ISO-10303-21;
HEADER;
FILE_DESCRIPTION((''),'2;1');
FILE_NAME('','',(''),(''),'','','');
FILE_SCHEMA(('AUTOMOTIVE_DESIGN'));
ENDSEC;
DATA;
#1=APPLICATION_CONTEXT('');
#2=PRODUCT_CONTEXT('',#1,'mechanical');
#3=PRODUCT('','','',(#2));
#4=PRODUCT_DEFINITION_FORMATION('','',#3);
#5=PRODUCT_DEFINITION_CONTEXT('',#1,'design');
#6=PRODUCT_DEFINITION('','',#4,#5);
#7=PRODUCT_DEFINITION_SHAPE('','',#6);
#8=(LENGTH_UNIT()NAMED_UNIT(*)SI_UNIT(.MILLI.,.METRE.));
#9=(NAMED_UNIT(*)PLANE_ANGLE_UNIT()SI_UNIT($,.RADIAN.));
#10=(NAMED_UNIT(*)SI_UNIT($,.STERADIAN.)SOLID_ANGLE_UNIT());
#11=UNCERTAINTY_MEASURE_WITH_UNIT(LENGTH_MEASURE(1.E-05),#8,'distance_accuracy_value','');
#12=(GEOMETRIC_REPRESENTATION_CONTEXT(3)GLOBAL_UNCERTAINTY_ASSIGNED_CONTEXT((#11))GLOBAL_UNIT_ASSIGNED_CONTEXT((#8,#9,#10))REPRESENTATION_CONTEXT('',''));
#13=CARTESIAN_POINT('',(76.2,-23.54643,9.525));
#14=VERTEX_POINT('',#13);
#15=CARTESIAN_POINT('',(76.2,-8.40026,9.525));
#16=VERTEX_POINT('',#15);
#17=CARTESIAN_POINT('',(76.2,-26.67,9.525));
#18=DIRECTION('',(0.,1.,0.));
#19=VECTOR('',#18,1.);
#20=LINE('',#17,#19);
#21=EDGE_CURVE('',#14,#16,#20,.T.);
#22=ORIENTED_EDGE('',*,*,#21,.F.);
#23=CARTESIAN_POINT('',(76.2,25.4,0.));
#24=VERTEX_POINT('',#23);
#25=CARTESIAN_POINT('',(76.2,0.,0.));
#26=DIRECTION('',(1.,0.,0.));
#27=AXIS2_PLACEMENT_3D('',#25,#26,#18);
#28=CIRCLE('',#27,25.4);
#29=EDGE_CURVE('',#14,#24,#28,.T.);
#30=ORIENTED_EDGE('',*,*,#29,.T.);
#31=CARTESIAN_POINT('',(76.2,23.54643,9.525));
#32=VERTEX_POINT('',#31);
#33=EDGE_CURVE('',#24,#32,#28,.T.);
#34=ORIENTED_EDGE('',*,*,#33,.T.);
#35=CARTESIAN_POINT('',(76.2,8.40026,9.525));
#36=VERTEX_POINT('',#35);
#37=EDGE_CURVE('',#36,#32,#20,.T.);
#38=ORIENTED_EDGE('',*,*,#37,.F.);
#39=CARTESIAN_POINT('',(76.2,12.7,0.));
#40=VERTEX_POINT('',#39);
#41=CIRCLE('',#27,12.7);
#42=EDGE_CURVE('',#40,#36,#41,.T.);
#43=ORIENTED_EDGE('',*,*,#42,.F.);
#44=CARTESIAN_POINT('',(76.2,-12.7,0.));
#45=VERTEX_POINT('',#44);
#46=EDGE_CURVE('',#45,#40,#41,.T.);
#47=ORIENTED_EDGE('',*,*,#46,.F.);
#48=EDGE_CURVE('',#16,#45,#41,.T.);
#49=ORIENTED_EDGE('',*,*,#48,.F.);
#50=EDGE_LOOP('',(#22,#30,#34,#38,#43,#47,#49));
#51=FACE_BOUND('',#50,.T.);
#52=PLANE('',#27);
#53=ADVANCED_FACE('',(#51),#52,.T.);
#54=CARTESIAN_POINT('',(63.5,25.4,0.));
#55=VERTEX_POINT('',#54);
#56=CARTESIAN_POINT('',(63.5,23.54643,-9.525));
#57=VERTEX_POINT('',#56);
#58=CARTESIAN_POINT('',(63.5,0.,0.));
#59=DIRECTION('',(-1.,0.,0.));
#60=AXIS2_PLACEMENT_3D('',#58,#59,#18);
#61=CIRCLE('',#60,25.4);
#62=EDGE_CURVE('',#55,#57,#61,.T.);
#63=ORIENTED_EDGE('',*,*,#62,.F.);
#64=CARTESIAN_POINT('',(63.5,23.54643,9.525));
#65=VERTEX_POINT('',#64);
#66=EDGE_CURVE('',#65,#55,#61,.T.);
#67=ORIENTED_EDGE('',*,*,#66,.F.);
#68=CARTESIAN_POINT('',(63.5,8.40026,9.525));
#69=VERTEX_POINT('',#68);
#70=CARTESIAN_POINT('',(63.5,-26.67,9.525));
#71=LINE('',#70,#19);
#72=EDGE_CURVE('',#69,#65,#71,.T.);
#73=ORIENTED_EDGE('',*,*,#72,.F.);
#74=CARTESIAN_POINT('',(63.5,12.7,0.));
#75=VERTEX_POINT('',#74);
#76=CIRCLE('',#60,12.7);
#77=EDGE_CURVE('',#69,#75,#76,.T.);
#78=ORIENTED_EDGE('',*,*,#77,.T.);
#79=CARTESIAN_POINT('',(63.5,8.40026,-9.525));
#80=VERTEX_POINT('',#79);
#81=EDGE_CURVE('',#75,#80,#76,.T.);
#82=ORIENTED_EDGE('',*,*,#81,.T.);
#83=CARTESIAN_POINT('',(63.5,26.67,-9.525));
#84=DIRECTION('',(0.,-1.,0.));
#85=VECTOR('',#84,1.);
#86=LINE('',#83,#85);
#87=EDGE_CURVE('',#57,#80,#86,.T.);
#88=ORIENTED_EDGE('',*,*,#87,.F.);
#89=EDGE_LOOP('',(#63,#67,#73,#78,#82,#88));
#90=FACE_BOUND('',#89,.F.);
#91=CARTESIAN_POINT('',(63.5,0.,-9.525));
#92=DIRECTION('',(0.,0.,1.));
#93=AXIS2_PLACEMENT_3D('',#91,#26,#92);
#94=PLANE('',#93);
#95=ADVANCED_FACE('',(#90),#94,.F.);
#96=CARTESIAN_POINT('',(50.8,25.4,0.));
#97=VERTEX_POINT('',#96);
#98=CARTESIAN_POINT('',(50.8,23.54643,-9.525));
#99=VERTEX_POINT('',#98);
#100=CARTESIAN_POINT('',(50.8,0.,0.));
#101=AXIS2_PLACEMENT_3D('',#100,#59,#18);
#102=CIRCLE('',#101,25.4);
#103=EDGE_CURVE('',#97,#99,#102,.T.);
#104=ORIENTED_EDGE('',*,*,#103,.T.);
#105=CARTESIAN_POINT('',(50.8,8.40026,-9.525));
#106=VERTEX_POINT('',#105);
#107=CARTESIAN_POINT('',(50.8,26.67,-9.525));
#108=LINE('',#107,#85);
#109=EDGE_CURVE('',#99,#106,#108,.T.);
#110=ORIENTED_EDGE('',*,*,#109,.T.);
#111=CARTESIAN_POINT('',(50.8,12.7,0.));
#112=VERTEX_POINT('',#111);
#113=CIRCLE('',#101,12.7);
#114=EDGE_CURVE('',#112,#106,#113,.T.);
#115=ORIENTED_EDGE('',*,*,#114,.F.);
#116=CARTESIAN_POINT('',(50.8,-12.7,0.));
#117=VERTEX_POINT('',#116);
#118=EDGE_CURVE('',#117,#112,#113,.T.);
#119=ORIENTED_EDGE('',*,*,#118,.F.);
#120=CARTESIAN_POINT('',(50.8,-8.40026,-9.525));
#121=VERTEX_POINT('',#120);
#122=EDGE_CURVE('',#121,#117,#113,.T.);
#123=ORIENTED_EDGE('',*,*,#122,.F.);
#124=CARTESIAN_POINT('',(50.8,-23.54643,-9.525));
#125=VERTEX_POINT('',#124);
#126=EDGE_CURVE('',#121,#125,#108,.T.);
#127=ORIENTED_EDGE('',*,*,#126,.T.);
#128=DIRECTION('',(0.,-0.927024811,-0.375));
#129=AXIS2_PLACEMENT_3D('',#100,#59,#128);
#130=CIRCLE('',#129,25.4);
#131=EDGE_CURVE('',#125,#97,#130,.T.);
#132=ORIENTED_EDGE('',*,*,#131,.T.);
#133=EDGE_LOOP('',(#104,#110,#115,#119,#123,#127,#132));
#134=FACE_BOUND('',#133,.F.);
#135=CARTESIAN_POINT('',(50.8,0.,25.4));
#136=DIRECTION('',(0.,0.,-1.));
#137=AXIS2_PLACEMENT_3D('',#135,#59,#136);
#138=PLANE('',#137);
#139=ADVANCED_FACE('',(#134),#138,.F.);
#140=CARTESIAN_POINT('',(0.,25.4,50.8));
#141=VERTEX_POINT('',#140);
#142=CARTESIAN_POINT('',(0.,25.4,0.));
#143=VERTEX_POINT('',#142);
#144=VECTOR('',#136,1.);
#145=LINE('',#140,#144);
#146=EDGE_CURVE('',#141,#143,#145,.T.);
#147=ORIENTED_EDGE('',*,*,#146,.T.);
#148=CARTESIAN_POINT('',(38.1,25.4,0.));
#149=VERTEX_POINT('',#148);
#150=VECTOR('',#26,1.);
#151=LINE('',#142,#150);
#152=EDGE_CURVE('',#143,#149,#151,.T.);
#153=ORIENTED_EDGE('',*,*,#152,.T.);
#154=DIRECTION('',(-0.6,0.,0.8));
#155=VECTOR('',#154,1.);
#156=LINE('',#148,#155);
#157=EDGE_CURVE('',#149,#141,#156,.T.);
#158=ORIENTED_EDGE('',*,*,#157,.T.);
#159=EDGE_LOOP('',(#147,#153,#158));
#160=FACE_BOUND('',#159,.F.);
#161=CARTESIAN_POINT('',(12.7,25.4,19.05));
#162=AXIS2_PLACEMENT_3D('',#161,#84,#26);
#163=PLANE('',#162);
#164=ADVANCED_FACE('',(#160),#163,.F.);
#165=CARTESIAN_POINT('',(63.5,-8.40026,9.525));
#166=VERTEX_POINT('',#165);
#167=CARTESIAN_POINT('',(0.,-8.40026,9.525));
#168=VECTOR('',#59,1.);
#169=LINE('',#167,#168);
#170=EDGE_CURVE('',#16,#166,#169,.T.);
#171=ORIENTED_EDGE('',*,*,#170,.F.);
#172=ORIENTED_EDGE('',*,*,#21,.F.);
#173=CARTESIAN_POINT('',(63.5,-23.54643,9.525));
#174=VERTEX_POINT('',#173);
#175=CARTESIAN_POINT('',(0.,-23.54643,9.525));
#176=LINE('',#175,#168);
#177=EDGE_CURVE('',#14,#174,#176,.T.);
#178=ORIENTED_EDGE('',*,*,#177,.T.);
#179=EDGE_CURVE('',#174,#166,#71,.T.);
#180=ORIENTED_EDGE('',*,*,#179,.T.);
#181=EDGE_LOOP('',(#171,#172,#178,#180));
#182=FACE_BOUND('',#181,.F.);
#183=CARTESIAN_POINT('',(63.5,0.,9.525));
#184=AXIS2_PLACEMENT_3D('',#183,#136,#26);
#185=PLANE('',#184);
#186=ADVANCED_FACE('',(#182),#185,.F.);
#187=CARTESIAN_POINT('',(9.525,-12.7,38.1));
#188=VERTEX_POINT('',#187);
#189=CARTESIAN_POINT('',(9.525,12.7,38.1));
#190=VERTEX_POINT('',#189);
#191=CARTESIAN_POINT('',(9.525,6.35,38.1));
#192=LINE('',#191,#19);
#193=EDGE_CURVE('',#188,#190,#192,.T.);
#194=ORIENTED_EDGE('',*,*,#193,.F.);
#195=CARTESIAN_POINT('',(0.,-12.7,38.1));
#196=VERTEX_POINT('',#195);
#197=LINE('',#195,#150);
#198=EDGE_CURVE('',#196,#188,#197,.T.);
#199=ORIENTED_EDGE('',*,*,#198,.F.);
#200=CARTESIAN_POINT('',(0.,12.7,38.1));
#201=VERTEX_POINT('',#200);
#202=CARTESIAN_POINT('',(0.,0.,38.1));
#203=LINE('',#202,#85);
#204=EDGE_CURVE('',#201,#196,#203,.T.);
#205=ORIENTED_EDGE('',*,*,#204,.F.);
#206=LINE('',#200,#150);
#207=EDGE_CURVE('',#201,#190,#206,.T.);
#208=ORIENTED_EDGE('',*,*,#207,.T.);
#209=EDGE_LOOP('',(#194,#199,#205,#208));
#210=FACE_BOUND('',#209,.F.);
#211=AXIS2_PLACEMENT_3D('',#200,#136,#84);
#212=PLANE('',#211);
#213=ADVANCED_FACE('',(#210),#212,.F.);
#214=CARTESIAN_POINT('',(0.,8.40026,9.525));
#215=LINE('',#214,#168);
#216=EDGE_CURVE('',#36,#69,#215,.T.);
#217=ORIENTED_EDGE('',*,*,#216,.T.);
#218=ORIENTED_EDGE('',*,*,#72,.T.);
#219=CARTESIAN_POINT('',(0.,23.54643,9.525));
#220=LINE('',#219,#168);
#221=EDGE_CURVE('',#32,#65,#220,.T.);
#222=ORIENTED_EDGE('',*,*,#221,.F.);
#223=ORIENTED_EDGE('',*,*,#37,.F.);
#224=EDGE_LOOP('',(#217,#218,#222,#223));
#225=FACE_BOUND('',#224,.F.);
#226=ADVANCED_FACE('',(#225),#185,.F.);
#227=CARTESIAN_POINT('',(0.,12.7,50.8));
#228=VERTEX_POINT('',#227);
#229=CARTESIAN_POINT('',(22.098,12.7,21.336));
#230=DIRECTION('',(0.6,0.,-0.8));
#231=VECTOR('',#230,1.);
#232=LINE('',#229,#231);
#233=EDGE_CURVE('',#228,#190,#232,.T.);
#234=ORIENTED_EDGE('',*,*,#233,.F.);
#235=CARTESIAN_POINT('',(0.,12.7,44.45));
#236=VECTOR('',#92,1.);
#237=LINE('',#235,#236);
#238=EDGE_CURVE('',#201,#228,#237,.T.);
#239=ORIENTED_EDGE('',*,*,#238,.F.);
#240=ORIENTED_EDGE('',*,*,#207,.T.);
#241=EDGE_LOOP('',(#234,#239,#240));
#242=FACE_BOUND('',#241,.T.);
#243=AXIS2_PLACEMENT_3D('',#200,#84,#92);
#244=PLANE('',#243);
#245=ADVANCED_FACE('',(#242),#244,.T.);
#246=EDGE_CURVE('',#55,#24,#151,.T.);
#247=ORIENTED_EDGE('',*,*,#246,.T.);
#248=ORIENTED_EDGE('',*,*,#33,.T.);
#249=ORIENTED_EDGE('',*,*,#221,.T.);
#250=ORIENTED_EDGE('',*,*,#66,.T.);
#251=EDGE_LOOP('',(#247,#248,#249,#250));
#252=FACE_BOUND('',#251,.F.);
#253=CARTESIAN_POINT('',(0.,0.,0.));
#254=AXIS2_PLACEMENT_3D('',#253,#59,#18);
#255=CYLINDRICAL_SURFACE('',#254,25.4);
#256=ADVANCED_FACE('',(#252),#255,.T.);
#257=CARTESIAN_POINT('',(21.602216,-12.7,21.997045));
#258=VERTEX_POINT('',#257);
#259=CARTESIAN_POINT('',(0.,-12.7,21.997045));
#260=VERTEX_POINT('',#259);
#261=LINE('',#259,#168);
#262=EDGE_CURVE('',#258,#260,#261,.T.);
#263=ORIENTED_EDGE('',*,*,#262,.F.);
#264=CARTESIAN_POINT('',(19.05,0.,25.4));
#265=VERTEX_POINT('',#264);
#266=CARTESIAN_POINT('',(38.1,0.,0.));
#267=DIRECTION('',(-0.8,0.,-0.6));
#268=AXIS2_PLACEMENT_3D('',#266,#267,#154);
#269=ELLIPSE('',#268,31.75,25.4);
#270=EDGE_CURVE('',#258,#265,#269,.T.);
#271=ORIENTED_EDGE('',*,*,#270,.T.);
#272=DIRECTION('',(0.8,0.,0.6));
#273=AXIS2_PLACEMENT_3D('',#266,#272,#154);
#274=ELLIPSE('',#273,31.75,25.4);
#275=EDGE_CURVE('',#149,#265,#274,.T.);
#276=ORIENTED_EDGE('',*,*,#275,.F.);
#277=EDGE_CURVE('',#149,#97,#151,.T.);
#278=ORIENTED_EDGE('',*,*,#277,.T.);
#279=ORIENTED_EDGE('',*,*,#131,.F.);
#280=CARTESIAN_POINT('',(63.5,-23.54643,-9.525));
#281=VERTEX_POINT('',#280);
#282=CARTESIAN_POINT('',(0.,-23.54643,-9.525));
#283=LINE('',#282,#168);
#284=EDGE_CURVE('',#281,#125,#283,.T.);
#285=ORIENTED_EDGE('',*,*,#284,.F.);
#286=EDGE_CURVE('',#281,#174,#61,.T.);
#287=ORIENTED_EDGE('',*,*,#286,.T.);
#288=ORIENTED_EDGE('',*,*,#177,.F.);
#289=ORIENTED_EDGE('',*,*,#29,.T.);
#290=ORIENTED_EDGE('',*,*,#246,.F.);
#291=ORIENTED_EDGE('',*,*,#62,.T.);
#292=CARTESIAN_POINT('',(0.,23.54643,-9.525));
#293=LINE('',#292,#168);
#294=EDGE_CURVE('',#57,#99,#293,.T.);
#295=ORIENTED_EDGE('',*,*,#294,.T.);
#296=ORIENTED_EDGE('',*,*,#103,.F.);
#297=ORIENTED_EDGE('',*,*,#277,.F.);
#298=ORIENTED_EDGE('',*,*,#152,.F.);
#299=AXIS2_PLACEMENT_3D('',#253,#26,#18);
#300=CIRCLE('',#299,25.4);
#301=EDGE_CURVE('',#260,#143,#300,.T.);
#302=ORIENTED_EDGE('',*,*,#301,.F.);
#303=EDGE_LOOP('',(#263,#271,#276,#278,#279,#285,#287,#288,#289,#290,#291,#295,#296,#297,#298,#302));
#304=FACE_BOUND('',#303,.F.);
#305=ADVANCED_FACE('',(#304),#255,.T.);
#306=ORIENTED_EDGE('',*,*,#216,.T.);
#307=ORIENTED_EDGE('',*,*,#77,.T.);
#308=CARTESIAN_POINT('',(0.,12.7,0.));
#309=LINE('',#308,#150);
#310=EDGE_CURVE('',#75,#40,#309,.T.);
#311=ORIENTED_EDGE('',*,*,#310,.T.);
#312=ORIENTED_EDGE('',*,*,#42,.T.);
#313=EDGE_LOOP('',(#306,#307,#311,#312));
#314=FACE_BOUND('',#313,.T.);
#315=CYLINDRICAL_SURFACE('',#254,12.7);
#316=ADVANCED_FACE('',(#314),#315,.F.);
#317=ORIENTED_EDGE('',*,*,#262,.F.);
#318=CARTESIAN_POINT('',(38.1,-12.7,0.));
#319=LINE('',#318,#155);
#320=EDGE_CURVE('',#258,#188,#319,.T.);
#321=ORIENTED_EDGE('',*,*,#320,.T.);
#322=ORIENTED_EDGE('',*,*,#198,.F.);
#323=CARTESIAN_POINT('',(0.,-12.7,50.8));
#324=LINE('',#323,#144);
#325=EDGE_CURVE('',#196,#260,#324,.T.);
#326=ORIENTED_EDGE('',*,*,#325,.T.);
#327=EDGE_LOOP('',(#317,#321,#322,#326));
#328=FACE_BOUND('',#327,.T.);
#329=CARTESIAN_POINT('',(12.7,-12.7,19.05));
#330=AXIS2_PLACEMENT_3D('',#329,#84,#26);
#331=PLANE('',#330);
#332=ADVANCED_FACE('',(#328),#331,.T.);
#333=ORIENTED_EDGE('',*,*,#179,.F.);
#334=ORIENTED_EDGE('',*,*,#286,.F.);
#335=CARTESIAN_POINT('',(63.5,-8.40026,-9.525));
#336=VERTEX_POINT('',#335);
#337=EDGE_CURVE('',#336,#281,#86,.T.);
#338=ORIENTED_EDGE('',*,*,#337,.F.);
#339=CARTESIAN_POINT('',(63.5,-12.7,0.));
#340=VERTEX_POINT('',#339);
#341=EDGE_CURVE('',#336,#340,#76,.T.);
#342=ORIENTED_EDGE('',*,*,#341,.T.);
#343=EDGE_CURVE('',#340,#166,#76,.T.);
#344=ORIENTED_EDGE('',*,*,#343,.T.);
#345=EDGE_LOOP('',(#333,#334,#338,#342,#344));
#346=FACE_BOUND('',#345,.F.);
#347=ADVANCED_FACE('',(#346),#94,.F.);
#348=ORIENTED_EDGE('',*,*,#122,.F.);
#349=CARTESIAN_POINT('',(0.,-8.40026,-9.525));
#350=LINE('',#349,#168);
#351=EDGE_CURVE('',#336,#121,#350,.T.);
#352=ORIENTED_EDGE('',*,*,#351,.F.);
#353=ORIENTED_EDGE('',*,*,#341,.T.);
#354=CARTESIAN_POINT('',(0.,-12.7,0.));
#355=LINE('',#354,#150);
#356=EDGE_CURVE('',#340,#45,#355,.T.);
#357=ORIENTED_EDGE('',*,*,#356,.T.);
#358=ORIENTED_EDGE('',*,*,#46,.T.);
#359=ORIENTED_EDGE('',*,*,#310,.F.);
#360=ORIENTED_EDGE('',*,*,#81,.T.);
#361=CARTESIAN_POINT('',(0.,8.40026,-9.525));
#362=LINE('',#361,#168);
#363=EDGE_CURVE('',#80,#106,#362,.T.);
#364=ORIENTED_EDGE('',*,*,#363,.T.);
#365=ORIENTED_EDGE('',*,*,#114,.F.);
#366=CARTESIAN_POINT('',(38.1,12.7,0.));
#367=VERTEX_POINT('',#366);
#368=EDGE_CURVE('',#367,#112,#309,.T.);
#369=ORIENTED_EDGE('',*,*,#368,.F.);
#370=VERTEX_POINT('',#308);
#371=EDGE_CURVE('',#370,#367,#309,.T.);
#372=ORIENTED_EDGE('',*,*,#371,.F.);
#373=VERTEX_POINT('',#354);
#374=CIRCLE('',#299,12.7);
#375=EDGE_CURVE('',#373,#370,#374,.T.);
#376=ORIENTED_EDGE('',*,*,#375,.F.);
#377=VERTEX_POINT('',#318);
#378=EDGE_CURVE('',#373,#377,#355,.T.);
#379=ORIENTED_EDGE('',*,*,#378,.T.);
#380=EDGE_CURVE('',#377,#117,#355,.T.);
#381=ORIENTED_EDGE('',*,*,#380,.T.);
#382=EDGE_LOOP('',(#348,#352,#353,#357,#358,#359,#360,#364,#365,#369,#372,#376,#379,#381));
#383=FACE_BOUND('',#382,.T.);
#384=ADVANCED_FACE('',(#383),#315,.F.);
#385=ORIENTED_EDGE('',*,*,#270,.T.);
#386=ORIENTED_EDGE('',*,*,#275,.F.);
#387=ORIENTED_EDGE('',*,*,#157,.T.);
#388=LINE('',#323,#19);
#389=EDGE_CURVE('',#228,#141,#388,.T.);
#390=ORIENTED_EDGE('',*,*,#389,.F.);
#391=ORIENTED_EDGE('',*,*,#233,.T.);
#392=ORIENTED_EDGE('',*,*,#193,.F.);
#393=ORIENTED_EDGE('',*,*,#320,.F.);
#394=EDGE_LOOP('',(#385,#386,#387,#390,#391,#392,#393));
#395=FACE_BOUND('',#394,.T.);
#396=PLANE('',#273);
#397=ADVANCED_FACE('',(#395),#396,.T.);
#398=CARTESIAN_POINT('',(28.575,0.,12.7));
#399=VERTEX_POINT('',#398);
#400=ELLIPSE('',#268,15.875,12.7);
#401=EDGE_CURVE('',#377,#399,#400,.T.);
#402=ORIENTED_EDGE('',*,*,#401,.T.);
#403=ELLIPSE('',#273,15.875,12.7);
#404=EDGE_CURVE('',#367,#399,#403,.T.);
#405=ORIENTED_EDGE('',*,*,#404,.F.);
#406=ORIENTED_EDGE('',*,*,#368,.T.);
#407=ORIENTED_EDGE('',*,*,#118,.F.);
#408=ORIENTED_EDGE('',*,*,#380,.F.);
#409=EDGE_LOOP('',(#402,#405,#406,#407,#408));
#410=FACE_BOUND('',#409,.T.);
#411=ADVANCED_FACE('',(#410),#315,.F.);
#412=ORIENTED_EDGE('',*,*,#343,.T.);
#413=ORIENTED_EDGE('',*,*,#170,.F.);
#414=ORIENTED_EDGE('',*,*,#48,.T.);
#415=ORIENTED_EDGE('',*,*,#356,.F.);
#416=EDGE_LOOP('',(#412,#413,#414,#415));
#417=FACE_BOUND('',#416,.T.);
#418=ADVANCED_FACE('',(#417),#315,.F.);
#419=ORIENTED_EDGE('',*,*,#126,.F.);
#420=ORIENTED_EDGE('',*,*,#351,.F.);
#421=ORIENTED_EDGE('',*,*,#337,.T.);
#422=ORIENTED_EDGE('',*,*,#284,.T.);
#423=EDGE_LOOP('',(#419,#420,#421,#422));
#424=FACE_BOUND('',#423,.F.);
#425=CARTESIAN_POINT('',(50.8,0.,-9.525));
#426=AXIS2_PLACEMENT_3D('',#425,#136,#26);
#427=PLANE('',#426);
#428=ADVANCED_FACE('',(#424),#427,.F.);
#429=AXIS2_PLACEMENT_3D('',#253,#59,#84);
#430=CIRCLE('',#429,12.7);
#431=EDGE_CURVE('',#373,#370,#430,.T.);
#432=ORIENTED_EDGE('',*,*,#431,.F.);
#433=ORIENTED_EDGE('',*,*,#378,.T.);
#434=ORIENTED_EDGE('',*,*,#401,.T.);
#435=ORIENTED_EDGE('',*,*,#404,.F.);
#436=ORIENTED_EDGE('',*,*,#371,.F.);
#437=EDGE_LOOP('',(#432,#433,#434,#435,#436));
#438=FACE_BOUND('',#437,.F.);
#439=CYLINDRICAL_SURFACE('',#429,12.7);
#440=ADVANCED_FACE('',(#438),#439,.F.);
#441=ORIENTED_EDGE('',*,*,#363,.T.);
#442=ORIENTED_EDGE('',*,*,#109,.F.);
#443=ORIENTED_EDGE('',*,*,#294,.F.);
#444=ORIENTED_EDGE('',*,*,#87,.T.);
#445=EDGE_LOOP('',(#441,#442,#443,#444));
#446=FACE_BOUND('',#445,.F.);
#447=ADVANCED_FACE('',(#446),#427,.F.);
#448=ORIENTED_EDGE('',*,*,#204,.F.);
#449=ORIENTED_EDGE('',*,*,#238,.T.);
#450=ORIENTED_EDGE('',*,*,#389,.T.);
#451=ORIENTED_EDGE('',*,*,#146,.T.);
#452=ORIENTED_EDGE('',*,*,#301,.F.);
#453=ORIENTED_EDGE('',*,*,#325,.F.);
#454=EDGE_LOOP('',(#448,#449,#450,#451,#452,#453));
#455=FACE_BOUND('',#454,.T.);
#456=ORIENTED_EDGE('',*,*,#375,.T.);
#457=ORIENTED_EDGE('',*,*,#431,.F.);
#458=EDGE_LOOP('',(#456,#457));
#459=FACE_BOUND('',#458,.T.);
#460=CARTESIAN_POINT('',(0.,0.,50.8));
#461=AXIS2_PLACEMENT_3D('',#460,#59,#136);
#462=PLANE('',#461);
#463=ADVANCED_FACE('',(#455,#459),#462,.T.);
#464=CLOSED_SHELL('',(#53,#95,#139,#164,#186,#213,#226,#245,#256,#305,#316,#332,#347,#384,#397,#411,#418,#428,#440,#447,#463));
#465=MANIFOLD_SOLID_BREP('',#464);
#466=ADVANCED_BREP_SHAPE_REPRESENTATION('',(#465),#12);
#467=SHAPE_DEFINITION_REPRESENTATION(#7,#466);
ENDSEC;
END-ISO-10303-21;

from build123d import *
from build123d import SkipClean  # not in build123d's __all__

# Parameters (mm, degrees)
F0_R          = 25.4
F0_R_2        = 12.7
F1_DEPTH      = 76.2
F3_DEPTH      = 26.67
F5_DEPTH      = 12.7
F5_DEPTH_BACK = 25.4
F6_W          = 25.4
F6_H          = 12.7
F7_DEPTH      = 76.201
F8_R          = 12.7
F9_DEPTH      = 76.201


with BuildPart() as f1:
    # F0 (on Right) → F1 (new body)
    with BuildSketch(Plane.YZ):
        Circle(F0_R)
        Circle(F0_R_2, mode=Mode.SUBTRACT)
    extrude(amount=F1_DEPTH)

    # F2 (on Front) → F3 (cut, symmetric)
    with BuildSketch(Plane.XZ):
        Polygon((76.2, 25.4), (50.8, 25.4), (50.8, -9.525), (63.5, -9.525), (63.5, 9.525), (76.2, 9.525), align=None)
    extrude(amount=F3_DEPTH, both=True, mode=Mode.SUBTRACT)

    # F4 (on Front) → F5 (join, two sides)
    with BuildSketch(Plane.XZ) as f5_sk:
        Polygon((0, 50.8), (0, 0), (38.1, 0), align=None)
    extrude(amount=F5_DEPTH)
    extrude(f5_sk.sketch, amount=-F5_DEPTH_BACK)

    # F6 (on face) → F7 (cut, through all)
    with BuildSketch(Plane(origin=(0, 0, 0), x_dir=(0, -1, 0), z_dir=(-1, 0, 0))):
        with Locations((0, 44.45)):
            Rectangle(F6_W, F6_H)
    extrude(amount=-F7_DEPTH, mode=Mode.SUBTRACT)

    # F8 (on face) → F9 (cut, through all)
    with BuildSketch(Plane(origin=(0, 0, 0), x_dir=(0, -1, 0), z_dir=(-1, 0, 0))):
        Circle(F8_R)
    with SkipClean():  # cleaning this boolean's faces spoils the solid; the shape is the same uncleaned
        extrude(amount=-F9_DEPTH, mode=Mode.SUBTRACT)


solid = f1.part
